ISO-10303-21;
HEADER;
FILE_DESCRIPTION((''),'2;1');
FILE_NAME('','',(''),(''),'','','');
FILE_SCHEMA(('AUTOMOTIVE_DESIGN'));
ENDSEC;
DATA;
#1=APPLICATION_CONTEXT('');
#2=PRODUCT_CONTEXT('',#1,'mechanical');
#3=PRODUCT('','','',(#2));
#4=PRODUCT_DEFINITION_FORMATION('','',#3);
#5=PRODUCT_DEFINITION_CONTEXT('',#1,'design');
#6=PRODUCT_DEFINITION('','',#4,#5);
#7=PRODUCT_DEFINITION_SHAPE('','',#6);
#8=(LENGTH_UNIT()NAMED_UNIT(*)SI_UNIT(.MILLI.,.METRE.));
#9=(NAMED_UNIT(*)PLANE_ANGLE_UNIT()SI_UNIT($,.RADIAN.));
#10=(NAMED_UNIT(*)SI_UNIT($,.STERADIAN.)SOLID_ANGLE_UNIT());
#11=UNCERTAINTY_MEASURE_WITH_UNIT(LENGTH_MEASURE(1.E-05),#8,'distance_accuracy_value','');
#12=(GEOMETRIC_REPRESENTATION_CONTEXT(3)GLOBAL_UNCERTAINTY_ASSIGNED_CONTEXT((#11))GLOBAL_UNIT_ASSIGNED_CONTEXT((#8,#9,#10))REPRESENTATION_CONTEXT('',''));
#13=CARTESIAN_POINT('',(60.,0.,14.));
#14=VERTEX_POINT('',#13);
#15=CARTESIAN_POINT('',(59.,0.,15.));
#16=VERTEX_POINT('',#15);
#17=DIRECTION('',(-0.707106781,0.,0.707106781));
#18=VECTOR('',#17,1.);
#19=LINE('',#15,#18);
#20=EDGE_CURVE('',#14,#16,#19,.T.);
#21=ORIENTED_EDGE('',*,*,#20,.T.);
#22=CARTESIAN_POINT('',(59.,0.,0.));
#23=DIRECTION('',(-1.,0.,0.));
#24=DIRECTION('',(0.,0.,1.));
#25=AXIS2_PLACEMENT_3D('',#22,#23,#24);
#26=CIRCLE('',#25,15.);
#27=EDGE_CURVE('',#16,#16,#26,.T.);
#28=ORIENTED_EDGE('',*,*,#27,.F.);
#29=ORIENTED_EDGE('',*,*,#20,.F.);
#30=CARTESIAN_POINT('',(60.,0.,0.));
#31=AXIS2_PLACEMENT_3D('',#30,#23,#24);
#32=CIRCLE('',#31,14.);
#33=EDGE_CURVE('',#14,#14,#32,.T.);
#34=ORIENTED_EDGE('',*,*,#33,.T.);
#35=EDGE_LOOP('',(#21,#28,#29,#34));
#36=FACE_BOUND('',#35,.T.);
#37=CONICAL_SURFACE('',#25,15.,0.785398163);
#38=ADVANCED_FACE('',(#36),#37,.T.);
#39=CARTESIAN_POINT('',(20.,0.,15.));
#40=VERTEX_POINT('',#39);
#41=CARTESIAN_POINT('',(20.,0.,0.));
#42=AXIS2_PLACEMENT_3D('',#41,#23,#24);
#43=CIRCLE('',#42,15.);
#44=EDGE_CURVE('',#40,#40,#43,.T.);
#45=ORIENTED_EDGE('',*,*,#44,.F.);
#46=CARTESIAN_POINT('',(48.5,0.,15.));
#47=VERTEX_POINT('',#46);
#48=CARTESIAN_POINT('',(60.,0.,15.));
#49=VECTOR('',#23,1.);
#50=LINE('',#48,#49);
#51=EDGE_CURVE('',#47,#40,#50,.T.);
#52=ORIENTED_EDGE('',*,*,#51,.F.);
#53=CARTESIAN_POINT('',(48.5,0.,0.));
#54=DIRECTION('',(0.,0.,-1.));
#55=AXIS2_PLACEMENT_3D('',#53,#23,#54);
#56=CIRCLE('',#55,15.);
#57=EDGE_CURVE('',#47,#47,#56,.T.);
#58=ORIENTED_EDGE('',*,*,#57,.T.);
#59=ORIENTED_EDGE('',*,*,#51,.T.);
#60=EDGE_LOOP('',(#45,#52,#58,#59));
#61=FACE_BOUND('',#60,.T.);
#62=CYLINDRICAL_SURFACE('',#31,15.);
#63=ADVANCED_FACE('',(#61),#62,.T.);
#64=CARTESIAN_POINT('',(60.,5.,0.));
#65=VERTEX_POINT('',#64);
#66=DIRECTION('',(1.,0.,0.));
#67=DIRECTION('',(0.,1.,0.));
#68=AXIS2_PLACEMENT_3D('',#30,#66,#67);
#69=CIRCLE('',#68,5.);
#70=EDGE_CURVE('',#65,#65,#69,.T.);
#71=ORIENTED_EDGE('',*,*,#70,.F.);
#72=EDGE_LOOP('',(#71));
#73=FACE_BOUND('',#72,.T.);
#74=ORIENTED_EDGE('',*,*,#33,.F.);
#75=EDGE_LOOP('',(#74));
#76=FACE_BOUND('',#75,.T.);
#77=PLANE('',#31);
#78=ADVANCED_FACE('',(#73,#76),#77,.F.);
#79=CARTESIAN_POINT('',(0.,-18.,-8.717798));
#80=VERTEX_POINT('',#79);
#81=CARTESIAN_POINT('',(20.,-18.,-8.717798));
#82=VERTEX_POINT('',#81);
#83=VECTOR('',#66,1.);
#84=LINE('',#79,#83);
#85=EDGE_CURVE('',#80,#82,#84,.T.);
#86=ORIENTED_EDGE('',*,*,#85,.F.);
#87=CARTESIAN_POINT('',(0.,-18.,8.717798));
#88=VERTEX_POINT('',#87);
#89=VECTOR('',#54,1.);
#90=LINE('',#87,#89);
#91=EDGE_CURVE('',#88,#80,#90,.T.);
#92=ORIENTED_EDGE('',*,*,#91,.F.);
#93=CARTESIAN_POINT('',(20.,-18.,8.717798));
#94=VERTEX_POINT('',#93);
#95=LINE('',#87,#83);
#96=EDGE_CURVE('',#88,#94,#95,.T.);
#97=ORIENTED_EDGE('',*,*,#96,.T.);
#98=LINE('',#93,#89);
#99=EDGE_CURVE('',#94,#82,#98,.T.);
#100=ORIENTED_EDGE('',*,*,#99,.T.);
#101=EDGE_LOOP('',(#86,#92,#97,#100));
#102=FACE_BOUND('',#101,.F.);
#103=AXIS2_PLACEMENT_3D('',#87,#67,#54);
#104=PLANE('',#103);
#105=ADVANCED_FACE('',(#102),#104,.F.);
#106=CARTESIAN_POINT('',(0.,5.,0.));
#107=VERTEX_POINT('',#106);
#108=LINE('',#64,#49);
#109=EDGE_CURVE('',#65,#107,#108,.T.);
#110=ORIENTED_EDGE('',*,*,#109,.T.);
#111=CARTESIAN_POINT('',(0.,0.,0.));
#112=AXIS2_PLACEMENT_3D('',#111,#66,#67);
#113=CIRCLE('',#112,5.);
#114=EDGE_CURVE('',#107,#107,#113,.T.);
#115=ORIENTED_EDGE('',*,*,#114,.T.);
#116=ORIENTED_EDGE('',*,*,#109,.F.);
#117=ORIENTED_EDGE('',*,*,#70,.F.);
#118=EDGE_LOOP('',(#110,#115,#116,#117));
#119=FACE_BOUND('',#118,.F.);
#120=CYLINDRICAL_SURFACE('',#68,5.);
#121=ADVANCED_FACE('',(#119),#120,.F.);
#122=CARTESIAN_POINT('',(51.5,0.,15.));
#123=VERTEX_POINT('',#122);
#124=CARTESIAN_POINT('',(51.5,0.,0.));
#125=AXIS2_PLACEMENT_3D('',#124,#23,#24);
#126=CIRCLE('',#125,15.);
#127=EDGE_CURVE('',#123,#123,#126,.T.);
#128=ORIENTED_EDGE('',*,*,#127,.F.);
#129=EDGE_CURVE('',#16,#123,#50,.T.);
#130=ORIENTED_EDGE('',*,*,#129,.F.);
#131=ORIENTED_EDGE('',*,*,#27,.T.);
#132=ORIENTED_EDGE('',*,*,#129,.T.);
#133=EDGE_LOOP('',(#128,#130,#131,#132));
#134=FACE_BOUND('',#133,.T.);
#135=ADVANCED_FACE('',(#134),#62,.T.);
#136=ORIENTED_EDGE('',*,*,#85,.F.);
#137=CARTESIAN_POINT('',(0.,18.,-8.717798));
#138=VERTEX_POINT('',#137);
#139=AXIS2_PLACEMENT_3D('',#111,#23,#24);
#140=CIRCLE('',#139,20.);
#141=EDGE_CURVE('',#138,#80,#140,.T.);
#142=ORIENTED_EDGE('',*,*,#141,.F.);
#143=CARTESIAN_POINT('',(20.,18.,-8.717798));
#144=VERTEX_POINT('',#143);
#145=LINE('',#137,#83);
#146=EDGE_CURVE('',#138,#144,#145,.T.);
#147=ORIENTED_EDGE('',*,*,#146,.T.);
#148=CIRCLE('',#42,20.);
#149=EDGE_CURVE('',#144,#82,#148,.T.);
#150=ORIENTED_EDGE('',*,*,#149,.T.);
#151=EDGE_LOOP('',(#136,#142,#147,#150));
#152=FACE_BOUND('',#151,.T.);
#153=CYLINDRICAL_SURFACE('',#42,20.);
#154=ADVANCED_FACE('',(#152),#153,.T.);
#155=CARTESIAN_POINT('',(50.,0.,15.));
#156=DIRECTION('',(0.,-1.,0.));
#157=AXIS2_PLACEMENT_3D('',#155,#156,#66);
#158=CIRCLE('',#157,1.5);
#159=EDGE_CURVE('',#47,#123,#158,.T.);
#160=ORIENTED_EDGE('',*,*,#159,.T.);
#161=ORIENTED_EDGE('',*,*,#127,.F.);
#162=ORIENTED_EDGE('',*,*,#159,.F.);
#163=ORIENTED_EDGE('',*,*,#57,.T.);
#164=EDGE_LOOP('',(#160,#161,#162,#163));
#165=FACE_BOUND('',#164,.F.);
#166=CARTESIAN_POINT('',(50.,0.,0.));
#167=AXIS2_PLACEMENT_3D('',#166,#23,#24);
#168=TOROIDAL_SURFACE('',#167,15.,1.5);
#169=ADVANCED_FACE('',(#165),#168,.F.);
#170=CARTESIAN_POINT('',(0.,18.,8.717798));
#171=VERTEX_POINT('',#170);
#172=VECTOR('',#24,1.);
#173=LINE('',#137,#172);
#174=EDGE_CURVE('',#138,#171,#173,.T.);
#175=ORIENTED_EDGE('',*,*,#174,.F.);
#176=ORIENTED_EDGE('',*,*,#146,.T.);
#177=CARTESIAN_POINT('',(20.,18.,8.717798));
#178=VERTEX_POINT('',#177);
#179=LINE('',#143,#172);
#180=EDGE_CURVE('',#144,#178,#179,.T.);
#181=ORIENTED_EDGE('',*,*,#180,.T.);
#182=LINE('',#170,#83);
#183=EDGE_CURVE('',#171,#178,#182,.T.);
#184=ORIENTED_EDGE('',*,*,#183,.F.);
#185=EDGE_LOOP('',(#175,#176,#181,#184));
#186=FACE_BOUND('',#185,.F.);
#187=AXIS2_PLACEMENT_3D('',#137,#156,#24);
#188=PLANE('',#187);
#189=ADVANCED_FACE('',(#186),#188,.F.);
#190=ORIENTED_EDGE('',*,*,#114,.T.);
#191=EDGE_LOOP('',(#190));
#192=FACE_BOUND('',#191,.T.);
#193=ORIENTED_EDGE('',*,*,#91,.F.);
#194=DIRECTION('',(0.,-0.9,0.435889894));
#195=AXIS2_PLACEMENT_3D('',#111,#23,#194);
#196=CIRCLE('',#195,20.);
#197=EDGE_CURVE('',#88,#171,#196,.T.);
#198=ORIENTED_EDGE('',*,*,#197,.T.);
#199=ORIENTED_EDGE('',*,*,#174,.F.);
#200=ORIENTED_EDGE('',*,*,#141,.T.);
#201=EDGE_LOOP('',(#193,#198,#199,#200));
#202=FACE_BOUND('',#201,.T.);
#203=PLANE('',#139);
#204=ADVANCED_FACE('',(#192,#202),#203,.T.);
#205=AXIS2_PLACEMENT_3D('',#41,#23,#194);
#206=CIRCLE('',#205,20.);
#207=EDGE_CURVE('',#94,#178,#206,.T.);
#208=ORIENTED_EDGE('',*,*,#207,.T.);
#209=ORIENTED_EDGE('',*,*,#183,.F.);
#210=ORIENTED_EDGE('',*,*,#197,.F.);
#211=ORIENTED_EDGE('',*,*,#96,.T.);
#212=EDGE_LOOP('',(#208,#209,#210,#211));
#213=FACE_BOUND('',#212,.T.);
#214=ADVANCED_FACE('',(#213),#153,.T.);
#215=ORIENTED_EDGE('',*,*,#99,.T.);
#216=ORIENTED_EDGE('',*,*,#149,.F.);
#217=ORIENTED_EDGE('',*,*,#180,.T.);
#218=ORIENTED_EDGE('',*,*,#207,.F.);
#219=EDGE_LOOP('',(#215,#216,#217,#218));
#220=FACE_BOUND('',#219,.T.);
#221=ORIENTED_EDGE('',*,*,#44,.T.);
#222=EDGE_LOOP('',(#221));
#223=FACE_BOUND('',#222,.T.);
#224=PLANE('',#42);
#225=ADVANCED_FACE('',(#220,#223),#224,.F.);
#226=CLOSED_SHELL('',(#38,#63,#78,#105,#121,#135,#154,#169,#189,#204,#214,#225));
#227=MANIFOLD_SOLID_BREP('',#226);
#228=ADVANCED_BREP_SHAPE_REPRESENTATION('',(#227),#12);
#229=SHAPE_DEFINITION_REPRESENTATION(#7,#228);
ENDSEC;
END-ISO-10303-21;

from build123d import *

# Parameters (mm, degrees)
F2_R     = 5
F3_DEPTH = 60.001
F4_SIZE  = 1
F5_R     = 1.5
F8_DEPTH = 20


with BuildPart() as f1:
    # F0 (on Front) → F1 (revolve)
    with BuildSketch(Plane.XZ):
        Polygon((0, 20), (0, 0), (60, 0), (60, 15), (20, 15), (20, 20), align=None)
    revolve(axis=Axis((31.1737104983, 0, 0), (-1, 0, 0)))

    # F2 (on face) → F3 (cut, through all)
    with BuildSketch(Plane.YZ.offset(60)):
        Circle(F2_R)
    extrude(amount=-F3_DEPTH, mode=Mode.SUBTRACT)

    # F4
    f4_edges = [f1.edges().sort_by_distance(p)[0] for p in [
        (60, 0, -15),
    ]]
    chamfer(f4_edges, length=F4_SIZE)

    # F5 (on Front) → F6 (revolve, cut)
    with BuildSketch(Plane.XZ):
        with Locations((50, 15)):
            Circle(F5_R)
    revolve(axis=Axis((31.1737104983, 0, 0), (-1, 0, 0)), mode=Mode.SUBTRACT)

    # F7 (on face) → F8 (cut, through all)
    with BuildSketch(Plane(origin=(0, 0, 0), x_dir=(0, -1, 0), z_dir=(-1, 0, 0))):
        with BuildLine():
            Line((18, 8.7177978871), (18, 42.813302379))
            Line((18, 42.813302379), (-18, 42.813302379))
            Line((-18, 42.813302379), (-18, 8.7177978871))
            ThreePointArc((-18, 8.7177978871), (0, 20), (18, 8.7177978871))
        make_face()
        with BuildLine():
            ThreePointArc((20, 0), (19.4935886896, 4.472135955), (18, 8.7177978871))
            Line((18, 8.7177978871), (18, -8.7177978871))
            ThreePointArc((18, -8.7177978871), (19.4935886896, -4.472135955), (20, 0))
        make_face()
        with BuildLine():
            Line((-18, -8.7177978871), (-18, 8.7177978871))
            ThreePointArc((-18, 8.7177978871), (-20, 0), (-18, -8.7177978871))
        make_face()
        with BuildLine():
            Line((18, -42.813302379), (18, -8.7177978871))
            ThreePointArc((18, -8.7177978871), (0, -20), (-18, -8.7177978871))
            Line((-18, -8.7177978871), (-18, -42.813302379))
            Line((-18, -42.813302379), (18, -42.813302379))
        make_face()
    extrude(amount=-F8_DEPTH, mode=Mode.SUBTRACT)


solid = f1.part
